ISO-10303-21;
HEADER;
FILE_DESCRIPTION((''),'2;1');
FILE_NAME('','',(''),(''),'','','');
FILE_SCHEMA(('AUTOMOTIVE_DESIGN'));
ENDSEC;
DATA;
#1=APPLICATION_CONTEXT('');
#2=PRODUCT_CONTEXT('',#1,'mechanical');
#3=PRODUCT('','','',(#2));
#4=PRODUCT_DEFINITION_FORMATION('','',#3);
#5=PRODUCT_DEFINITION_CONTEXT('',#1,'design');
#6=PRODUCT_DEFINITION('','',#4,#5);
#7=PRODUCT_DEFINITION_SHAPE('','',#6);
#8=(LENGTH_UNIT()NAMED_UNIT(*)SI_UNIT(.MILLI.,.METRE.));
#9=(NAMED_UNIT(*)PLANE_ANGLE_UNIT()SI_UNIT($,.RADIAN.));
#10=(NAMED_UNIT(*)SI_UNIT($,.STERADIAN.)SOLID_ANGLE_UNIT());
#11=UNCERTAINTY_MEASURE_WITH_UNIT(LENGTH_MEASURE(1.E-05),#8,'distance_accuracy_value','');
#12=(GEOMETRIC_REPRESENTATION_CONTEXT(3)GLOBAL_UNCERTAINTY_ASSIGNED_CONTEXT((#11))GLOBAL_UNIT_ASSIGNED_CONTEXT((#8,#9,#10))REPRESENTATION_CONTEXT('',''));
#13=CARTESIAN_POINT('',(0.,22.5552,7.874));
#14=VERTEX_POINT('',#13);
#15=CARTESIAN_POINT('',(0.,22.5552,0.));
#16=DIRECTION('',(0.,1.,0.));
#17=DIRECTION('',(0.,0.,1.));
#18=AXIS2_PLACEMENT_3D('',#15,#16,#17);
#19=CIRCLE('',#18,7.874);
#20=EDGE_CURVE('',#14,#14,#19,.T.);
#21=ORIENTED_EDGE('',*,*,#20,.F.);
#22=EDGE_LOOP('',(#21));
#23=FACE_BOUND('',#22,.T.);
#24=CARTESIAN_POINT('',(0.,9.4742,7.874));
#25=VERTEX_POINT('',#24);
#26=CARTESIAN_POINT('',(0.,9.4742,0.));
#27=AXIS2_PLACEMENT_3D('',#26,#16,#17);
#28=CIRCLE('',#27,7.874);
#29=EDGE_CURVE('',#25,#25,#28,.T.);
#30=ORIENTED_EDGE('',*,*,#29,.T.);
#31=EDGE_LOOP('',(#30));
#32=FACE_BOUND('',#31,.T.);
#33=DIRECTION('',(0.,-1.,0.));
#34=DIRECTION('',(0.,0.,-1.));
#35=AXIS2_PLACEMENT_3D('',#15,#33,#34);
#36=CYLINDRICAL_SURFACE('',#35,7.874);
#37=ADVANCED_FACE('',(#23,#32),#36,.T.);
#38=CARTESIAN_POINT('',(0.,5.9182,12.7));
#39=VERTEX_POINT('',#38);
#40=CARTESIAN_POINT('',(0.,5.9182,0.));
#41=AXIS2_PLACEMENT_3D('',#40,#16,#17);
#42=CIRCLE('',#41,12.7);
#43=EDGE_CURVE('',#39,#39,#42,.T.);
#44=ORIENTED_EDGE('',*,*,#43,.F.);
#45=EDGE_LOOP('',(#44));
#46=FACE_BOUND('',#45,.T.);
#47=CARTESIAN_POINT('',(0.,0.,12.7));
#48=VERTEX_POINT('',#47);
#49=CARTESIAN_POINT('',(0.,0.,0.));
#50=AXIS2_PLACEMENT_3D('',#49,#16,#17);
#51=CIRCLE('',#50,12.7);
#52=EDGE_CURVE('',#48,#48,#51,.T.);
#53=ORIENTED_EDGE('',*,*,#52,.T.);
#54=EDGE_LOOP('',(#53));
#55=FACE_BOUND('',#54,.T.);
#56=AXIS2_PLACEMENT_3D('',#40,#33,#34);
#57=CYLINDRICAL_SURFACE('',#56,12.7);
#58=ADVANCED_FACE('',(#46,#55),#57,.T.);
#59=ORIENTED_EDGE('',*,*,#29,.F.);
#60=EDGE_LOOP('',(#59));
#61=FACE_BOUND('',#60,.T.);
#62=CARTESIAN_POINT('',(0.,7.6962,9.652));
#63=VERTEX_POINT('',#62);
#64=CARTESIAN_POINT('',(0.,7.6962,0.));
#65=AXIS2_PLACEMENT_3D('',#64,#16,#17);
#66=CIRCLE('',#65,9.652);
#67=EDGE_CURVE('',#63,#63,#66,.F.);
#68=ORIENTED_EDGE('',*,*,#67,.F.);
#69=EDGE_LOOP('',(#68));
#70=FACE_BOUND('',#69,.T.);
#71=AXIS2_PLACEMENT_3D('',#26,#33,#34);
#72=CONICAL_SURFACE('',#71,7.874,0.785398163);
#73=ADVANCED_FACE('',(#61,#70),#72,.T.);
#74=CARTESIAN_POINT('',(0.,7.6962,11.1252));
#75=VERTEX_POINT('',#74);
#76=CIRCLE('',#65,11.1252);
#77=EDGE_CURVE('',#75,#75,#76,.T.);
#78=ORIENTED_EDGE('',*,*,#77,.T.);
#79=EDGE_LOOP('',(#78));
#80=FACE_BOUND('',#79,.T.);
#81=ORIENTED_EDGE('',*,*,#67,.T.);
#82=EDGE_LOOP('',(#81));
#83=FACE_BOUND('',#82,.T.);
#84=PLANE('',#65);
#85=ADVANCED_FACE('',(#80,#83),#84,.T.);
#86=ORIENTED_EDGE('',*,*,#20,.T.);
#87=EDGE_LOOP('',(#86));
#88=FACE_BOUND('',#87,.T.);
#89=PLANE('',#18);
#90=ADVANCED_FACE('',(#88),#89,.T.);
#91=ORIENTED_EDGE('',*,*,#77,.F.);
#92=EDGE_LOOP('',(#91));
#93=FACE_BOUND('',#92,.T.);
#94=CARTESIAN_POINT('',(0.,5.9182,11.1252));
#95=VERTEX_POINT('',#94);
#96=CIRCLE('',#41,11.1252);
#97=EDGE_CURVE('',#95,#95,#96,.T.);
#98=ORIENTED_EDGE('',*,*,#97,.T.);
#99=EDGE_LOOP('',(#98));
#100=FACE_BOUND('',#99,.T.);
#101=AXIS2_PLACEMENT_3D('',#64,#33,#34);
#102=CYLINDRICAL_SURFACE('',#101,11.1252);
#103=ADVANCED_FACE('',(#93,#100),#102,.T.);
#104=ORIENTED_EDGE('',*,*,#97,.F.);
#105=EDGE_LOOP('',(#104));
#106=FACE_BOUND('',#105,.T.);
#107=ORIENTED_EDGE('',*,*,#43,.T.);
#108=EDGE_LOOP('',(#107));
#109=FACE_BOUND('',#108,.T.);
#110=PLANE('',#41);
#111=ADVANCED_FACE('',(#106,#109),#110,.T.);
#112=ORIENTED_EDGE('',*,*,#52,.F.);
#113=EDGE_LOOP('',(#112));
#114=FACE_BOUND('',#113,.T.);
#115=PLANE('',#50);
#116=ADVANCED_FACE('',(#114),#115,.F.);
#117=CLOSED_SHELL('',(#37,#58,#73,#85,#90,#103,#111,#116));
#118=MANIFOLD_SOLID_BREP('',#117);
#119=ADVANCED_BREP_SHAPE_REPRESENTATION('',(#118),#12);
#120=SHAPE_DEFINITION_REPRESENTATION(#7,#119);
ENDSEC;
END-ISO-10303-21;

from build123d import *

# Parameters (mm, degrees)
SKETCH1_R           = 12.7
BOSS_EXTRUDE1_DEPTH = 5.9182
SKETCH3_R           = 11.1252
BOSS_EXTRUDE2_DEPTH = 1.778
SKETCH4_R           = 7.874
BOSS_EXTRUDE3_DEPTH = 14.859


with BuildPart() as part:
    # Sketch1 → Boss-Extrude1 (new body)
    with BuildSketch(Plane(origin=(0, 0, 0), x_dir=(1, 0, 0), z_dir=(0, 1, 0))):
        with Locations(Location((0, 0, 0), (0, 0, 270))):
            Circle(SKETCH1_R)
    extrude(amount=BOSS_EXTRUDE1_DEPTH)

    # Sketch3 → Boss-Extrude2 (add)
    with BuildSketch(Plane(origin=(0, 5.9182, 0), x_dir=(1, 0, 0), z_dir=(0, 1, 0))):
        with Locations(Location((0, 0, 0), (0, 0, 270))):
            Circle(SKETCH3_R)
    extrude(amount=BOSS_EXTRUDE2_DEPTH)

    # Sketch4 → Boss-Extrude3 (add)
    with BuildSketch(Plane(origin=(0, 7.6962, 0), x_dir=(1, 0, 0), z_dir=(0, 1, 0))):
        with Locations(Location((0, 0, 0), (0, 0, 270))):
            Circle(SKETCH4_R)
    extrude(amount=BOSS_EXTRUDE3_DEPTH)

    # Chamfer2: read off the stored shape, not the designer's step
    # Chamfer2 outline → Chamfer2 (revolve)
    with BuildSketch(Plane.XY):
        Polygon((9.652, 7.6962), (7.874, 9.4742), (7.874, 7.6962), align=None)
    revolve(axis=Axis((0, 0, 0), (0, 1, 0)))


solid = part.part
